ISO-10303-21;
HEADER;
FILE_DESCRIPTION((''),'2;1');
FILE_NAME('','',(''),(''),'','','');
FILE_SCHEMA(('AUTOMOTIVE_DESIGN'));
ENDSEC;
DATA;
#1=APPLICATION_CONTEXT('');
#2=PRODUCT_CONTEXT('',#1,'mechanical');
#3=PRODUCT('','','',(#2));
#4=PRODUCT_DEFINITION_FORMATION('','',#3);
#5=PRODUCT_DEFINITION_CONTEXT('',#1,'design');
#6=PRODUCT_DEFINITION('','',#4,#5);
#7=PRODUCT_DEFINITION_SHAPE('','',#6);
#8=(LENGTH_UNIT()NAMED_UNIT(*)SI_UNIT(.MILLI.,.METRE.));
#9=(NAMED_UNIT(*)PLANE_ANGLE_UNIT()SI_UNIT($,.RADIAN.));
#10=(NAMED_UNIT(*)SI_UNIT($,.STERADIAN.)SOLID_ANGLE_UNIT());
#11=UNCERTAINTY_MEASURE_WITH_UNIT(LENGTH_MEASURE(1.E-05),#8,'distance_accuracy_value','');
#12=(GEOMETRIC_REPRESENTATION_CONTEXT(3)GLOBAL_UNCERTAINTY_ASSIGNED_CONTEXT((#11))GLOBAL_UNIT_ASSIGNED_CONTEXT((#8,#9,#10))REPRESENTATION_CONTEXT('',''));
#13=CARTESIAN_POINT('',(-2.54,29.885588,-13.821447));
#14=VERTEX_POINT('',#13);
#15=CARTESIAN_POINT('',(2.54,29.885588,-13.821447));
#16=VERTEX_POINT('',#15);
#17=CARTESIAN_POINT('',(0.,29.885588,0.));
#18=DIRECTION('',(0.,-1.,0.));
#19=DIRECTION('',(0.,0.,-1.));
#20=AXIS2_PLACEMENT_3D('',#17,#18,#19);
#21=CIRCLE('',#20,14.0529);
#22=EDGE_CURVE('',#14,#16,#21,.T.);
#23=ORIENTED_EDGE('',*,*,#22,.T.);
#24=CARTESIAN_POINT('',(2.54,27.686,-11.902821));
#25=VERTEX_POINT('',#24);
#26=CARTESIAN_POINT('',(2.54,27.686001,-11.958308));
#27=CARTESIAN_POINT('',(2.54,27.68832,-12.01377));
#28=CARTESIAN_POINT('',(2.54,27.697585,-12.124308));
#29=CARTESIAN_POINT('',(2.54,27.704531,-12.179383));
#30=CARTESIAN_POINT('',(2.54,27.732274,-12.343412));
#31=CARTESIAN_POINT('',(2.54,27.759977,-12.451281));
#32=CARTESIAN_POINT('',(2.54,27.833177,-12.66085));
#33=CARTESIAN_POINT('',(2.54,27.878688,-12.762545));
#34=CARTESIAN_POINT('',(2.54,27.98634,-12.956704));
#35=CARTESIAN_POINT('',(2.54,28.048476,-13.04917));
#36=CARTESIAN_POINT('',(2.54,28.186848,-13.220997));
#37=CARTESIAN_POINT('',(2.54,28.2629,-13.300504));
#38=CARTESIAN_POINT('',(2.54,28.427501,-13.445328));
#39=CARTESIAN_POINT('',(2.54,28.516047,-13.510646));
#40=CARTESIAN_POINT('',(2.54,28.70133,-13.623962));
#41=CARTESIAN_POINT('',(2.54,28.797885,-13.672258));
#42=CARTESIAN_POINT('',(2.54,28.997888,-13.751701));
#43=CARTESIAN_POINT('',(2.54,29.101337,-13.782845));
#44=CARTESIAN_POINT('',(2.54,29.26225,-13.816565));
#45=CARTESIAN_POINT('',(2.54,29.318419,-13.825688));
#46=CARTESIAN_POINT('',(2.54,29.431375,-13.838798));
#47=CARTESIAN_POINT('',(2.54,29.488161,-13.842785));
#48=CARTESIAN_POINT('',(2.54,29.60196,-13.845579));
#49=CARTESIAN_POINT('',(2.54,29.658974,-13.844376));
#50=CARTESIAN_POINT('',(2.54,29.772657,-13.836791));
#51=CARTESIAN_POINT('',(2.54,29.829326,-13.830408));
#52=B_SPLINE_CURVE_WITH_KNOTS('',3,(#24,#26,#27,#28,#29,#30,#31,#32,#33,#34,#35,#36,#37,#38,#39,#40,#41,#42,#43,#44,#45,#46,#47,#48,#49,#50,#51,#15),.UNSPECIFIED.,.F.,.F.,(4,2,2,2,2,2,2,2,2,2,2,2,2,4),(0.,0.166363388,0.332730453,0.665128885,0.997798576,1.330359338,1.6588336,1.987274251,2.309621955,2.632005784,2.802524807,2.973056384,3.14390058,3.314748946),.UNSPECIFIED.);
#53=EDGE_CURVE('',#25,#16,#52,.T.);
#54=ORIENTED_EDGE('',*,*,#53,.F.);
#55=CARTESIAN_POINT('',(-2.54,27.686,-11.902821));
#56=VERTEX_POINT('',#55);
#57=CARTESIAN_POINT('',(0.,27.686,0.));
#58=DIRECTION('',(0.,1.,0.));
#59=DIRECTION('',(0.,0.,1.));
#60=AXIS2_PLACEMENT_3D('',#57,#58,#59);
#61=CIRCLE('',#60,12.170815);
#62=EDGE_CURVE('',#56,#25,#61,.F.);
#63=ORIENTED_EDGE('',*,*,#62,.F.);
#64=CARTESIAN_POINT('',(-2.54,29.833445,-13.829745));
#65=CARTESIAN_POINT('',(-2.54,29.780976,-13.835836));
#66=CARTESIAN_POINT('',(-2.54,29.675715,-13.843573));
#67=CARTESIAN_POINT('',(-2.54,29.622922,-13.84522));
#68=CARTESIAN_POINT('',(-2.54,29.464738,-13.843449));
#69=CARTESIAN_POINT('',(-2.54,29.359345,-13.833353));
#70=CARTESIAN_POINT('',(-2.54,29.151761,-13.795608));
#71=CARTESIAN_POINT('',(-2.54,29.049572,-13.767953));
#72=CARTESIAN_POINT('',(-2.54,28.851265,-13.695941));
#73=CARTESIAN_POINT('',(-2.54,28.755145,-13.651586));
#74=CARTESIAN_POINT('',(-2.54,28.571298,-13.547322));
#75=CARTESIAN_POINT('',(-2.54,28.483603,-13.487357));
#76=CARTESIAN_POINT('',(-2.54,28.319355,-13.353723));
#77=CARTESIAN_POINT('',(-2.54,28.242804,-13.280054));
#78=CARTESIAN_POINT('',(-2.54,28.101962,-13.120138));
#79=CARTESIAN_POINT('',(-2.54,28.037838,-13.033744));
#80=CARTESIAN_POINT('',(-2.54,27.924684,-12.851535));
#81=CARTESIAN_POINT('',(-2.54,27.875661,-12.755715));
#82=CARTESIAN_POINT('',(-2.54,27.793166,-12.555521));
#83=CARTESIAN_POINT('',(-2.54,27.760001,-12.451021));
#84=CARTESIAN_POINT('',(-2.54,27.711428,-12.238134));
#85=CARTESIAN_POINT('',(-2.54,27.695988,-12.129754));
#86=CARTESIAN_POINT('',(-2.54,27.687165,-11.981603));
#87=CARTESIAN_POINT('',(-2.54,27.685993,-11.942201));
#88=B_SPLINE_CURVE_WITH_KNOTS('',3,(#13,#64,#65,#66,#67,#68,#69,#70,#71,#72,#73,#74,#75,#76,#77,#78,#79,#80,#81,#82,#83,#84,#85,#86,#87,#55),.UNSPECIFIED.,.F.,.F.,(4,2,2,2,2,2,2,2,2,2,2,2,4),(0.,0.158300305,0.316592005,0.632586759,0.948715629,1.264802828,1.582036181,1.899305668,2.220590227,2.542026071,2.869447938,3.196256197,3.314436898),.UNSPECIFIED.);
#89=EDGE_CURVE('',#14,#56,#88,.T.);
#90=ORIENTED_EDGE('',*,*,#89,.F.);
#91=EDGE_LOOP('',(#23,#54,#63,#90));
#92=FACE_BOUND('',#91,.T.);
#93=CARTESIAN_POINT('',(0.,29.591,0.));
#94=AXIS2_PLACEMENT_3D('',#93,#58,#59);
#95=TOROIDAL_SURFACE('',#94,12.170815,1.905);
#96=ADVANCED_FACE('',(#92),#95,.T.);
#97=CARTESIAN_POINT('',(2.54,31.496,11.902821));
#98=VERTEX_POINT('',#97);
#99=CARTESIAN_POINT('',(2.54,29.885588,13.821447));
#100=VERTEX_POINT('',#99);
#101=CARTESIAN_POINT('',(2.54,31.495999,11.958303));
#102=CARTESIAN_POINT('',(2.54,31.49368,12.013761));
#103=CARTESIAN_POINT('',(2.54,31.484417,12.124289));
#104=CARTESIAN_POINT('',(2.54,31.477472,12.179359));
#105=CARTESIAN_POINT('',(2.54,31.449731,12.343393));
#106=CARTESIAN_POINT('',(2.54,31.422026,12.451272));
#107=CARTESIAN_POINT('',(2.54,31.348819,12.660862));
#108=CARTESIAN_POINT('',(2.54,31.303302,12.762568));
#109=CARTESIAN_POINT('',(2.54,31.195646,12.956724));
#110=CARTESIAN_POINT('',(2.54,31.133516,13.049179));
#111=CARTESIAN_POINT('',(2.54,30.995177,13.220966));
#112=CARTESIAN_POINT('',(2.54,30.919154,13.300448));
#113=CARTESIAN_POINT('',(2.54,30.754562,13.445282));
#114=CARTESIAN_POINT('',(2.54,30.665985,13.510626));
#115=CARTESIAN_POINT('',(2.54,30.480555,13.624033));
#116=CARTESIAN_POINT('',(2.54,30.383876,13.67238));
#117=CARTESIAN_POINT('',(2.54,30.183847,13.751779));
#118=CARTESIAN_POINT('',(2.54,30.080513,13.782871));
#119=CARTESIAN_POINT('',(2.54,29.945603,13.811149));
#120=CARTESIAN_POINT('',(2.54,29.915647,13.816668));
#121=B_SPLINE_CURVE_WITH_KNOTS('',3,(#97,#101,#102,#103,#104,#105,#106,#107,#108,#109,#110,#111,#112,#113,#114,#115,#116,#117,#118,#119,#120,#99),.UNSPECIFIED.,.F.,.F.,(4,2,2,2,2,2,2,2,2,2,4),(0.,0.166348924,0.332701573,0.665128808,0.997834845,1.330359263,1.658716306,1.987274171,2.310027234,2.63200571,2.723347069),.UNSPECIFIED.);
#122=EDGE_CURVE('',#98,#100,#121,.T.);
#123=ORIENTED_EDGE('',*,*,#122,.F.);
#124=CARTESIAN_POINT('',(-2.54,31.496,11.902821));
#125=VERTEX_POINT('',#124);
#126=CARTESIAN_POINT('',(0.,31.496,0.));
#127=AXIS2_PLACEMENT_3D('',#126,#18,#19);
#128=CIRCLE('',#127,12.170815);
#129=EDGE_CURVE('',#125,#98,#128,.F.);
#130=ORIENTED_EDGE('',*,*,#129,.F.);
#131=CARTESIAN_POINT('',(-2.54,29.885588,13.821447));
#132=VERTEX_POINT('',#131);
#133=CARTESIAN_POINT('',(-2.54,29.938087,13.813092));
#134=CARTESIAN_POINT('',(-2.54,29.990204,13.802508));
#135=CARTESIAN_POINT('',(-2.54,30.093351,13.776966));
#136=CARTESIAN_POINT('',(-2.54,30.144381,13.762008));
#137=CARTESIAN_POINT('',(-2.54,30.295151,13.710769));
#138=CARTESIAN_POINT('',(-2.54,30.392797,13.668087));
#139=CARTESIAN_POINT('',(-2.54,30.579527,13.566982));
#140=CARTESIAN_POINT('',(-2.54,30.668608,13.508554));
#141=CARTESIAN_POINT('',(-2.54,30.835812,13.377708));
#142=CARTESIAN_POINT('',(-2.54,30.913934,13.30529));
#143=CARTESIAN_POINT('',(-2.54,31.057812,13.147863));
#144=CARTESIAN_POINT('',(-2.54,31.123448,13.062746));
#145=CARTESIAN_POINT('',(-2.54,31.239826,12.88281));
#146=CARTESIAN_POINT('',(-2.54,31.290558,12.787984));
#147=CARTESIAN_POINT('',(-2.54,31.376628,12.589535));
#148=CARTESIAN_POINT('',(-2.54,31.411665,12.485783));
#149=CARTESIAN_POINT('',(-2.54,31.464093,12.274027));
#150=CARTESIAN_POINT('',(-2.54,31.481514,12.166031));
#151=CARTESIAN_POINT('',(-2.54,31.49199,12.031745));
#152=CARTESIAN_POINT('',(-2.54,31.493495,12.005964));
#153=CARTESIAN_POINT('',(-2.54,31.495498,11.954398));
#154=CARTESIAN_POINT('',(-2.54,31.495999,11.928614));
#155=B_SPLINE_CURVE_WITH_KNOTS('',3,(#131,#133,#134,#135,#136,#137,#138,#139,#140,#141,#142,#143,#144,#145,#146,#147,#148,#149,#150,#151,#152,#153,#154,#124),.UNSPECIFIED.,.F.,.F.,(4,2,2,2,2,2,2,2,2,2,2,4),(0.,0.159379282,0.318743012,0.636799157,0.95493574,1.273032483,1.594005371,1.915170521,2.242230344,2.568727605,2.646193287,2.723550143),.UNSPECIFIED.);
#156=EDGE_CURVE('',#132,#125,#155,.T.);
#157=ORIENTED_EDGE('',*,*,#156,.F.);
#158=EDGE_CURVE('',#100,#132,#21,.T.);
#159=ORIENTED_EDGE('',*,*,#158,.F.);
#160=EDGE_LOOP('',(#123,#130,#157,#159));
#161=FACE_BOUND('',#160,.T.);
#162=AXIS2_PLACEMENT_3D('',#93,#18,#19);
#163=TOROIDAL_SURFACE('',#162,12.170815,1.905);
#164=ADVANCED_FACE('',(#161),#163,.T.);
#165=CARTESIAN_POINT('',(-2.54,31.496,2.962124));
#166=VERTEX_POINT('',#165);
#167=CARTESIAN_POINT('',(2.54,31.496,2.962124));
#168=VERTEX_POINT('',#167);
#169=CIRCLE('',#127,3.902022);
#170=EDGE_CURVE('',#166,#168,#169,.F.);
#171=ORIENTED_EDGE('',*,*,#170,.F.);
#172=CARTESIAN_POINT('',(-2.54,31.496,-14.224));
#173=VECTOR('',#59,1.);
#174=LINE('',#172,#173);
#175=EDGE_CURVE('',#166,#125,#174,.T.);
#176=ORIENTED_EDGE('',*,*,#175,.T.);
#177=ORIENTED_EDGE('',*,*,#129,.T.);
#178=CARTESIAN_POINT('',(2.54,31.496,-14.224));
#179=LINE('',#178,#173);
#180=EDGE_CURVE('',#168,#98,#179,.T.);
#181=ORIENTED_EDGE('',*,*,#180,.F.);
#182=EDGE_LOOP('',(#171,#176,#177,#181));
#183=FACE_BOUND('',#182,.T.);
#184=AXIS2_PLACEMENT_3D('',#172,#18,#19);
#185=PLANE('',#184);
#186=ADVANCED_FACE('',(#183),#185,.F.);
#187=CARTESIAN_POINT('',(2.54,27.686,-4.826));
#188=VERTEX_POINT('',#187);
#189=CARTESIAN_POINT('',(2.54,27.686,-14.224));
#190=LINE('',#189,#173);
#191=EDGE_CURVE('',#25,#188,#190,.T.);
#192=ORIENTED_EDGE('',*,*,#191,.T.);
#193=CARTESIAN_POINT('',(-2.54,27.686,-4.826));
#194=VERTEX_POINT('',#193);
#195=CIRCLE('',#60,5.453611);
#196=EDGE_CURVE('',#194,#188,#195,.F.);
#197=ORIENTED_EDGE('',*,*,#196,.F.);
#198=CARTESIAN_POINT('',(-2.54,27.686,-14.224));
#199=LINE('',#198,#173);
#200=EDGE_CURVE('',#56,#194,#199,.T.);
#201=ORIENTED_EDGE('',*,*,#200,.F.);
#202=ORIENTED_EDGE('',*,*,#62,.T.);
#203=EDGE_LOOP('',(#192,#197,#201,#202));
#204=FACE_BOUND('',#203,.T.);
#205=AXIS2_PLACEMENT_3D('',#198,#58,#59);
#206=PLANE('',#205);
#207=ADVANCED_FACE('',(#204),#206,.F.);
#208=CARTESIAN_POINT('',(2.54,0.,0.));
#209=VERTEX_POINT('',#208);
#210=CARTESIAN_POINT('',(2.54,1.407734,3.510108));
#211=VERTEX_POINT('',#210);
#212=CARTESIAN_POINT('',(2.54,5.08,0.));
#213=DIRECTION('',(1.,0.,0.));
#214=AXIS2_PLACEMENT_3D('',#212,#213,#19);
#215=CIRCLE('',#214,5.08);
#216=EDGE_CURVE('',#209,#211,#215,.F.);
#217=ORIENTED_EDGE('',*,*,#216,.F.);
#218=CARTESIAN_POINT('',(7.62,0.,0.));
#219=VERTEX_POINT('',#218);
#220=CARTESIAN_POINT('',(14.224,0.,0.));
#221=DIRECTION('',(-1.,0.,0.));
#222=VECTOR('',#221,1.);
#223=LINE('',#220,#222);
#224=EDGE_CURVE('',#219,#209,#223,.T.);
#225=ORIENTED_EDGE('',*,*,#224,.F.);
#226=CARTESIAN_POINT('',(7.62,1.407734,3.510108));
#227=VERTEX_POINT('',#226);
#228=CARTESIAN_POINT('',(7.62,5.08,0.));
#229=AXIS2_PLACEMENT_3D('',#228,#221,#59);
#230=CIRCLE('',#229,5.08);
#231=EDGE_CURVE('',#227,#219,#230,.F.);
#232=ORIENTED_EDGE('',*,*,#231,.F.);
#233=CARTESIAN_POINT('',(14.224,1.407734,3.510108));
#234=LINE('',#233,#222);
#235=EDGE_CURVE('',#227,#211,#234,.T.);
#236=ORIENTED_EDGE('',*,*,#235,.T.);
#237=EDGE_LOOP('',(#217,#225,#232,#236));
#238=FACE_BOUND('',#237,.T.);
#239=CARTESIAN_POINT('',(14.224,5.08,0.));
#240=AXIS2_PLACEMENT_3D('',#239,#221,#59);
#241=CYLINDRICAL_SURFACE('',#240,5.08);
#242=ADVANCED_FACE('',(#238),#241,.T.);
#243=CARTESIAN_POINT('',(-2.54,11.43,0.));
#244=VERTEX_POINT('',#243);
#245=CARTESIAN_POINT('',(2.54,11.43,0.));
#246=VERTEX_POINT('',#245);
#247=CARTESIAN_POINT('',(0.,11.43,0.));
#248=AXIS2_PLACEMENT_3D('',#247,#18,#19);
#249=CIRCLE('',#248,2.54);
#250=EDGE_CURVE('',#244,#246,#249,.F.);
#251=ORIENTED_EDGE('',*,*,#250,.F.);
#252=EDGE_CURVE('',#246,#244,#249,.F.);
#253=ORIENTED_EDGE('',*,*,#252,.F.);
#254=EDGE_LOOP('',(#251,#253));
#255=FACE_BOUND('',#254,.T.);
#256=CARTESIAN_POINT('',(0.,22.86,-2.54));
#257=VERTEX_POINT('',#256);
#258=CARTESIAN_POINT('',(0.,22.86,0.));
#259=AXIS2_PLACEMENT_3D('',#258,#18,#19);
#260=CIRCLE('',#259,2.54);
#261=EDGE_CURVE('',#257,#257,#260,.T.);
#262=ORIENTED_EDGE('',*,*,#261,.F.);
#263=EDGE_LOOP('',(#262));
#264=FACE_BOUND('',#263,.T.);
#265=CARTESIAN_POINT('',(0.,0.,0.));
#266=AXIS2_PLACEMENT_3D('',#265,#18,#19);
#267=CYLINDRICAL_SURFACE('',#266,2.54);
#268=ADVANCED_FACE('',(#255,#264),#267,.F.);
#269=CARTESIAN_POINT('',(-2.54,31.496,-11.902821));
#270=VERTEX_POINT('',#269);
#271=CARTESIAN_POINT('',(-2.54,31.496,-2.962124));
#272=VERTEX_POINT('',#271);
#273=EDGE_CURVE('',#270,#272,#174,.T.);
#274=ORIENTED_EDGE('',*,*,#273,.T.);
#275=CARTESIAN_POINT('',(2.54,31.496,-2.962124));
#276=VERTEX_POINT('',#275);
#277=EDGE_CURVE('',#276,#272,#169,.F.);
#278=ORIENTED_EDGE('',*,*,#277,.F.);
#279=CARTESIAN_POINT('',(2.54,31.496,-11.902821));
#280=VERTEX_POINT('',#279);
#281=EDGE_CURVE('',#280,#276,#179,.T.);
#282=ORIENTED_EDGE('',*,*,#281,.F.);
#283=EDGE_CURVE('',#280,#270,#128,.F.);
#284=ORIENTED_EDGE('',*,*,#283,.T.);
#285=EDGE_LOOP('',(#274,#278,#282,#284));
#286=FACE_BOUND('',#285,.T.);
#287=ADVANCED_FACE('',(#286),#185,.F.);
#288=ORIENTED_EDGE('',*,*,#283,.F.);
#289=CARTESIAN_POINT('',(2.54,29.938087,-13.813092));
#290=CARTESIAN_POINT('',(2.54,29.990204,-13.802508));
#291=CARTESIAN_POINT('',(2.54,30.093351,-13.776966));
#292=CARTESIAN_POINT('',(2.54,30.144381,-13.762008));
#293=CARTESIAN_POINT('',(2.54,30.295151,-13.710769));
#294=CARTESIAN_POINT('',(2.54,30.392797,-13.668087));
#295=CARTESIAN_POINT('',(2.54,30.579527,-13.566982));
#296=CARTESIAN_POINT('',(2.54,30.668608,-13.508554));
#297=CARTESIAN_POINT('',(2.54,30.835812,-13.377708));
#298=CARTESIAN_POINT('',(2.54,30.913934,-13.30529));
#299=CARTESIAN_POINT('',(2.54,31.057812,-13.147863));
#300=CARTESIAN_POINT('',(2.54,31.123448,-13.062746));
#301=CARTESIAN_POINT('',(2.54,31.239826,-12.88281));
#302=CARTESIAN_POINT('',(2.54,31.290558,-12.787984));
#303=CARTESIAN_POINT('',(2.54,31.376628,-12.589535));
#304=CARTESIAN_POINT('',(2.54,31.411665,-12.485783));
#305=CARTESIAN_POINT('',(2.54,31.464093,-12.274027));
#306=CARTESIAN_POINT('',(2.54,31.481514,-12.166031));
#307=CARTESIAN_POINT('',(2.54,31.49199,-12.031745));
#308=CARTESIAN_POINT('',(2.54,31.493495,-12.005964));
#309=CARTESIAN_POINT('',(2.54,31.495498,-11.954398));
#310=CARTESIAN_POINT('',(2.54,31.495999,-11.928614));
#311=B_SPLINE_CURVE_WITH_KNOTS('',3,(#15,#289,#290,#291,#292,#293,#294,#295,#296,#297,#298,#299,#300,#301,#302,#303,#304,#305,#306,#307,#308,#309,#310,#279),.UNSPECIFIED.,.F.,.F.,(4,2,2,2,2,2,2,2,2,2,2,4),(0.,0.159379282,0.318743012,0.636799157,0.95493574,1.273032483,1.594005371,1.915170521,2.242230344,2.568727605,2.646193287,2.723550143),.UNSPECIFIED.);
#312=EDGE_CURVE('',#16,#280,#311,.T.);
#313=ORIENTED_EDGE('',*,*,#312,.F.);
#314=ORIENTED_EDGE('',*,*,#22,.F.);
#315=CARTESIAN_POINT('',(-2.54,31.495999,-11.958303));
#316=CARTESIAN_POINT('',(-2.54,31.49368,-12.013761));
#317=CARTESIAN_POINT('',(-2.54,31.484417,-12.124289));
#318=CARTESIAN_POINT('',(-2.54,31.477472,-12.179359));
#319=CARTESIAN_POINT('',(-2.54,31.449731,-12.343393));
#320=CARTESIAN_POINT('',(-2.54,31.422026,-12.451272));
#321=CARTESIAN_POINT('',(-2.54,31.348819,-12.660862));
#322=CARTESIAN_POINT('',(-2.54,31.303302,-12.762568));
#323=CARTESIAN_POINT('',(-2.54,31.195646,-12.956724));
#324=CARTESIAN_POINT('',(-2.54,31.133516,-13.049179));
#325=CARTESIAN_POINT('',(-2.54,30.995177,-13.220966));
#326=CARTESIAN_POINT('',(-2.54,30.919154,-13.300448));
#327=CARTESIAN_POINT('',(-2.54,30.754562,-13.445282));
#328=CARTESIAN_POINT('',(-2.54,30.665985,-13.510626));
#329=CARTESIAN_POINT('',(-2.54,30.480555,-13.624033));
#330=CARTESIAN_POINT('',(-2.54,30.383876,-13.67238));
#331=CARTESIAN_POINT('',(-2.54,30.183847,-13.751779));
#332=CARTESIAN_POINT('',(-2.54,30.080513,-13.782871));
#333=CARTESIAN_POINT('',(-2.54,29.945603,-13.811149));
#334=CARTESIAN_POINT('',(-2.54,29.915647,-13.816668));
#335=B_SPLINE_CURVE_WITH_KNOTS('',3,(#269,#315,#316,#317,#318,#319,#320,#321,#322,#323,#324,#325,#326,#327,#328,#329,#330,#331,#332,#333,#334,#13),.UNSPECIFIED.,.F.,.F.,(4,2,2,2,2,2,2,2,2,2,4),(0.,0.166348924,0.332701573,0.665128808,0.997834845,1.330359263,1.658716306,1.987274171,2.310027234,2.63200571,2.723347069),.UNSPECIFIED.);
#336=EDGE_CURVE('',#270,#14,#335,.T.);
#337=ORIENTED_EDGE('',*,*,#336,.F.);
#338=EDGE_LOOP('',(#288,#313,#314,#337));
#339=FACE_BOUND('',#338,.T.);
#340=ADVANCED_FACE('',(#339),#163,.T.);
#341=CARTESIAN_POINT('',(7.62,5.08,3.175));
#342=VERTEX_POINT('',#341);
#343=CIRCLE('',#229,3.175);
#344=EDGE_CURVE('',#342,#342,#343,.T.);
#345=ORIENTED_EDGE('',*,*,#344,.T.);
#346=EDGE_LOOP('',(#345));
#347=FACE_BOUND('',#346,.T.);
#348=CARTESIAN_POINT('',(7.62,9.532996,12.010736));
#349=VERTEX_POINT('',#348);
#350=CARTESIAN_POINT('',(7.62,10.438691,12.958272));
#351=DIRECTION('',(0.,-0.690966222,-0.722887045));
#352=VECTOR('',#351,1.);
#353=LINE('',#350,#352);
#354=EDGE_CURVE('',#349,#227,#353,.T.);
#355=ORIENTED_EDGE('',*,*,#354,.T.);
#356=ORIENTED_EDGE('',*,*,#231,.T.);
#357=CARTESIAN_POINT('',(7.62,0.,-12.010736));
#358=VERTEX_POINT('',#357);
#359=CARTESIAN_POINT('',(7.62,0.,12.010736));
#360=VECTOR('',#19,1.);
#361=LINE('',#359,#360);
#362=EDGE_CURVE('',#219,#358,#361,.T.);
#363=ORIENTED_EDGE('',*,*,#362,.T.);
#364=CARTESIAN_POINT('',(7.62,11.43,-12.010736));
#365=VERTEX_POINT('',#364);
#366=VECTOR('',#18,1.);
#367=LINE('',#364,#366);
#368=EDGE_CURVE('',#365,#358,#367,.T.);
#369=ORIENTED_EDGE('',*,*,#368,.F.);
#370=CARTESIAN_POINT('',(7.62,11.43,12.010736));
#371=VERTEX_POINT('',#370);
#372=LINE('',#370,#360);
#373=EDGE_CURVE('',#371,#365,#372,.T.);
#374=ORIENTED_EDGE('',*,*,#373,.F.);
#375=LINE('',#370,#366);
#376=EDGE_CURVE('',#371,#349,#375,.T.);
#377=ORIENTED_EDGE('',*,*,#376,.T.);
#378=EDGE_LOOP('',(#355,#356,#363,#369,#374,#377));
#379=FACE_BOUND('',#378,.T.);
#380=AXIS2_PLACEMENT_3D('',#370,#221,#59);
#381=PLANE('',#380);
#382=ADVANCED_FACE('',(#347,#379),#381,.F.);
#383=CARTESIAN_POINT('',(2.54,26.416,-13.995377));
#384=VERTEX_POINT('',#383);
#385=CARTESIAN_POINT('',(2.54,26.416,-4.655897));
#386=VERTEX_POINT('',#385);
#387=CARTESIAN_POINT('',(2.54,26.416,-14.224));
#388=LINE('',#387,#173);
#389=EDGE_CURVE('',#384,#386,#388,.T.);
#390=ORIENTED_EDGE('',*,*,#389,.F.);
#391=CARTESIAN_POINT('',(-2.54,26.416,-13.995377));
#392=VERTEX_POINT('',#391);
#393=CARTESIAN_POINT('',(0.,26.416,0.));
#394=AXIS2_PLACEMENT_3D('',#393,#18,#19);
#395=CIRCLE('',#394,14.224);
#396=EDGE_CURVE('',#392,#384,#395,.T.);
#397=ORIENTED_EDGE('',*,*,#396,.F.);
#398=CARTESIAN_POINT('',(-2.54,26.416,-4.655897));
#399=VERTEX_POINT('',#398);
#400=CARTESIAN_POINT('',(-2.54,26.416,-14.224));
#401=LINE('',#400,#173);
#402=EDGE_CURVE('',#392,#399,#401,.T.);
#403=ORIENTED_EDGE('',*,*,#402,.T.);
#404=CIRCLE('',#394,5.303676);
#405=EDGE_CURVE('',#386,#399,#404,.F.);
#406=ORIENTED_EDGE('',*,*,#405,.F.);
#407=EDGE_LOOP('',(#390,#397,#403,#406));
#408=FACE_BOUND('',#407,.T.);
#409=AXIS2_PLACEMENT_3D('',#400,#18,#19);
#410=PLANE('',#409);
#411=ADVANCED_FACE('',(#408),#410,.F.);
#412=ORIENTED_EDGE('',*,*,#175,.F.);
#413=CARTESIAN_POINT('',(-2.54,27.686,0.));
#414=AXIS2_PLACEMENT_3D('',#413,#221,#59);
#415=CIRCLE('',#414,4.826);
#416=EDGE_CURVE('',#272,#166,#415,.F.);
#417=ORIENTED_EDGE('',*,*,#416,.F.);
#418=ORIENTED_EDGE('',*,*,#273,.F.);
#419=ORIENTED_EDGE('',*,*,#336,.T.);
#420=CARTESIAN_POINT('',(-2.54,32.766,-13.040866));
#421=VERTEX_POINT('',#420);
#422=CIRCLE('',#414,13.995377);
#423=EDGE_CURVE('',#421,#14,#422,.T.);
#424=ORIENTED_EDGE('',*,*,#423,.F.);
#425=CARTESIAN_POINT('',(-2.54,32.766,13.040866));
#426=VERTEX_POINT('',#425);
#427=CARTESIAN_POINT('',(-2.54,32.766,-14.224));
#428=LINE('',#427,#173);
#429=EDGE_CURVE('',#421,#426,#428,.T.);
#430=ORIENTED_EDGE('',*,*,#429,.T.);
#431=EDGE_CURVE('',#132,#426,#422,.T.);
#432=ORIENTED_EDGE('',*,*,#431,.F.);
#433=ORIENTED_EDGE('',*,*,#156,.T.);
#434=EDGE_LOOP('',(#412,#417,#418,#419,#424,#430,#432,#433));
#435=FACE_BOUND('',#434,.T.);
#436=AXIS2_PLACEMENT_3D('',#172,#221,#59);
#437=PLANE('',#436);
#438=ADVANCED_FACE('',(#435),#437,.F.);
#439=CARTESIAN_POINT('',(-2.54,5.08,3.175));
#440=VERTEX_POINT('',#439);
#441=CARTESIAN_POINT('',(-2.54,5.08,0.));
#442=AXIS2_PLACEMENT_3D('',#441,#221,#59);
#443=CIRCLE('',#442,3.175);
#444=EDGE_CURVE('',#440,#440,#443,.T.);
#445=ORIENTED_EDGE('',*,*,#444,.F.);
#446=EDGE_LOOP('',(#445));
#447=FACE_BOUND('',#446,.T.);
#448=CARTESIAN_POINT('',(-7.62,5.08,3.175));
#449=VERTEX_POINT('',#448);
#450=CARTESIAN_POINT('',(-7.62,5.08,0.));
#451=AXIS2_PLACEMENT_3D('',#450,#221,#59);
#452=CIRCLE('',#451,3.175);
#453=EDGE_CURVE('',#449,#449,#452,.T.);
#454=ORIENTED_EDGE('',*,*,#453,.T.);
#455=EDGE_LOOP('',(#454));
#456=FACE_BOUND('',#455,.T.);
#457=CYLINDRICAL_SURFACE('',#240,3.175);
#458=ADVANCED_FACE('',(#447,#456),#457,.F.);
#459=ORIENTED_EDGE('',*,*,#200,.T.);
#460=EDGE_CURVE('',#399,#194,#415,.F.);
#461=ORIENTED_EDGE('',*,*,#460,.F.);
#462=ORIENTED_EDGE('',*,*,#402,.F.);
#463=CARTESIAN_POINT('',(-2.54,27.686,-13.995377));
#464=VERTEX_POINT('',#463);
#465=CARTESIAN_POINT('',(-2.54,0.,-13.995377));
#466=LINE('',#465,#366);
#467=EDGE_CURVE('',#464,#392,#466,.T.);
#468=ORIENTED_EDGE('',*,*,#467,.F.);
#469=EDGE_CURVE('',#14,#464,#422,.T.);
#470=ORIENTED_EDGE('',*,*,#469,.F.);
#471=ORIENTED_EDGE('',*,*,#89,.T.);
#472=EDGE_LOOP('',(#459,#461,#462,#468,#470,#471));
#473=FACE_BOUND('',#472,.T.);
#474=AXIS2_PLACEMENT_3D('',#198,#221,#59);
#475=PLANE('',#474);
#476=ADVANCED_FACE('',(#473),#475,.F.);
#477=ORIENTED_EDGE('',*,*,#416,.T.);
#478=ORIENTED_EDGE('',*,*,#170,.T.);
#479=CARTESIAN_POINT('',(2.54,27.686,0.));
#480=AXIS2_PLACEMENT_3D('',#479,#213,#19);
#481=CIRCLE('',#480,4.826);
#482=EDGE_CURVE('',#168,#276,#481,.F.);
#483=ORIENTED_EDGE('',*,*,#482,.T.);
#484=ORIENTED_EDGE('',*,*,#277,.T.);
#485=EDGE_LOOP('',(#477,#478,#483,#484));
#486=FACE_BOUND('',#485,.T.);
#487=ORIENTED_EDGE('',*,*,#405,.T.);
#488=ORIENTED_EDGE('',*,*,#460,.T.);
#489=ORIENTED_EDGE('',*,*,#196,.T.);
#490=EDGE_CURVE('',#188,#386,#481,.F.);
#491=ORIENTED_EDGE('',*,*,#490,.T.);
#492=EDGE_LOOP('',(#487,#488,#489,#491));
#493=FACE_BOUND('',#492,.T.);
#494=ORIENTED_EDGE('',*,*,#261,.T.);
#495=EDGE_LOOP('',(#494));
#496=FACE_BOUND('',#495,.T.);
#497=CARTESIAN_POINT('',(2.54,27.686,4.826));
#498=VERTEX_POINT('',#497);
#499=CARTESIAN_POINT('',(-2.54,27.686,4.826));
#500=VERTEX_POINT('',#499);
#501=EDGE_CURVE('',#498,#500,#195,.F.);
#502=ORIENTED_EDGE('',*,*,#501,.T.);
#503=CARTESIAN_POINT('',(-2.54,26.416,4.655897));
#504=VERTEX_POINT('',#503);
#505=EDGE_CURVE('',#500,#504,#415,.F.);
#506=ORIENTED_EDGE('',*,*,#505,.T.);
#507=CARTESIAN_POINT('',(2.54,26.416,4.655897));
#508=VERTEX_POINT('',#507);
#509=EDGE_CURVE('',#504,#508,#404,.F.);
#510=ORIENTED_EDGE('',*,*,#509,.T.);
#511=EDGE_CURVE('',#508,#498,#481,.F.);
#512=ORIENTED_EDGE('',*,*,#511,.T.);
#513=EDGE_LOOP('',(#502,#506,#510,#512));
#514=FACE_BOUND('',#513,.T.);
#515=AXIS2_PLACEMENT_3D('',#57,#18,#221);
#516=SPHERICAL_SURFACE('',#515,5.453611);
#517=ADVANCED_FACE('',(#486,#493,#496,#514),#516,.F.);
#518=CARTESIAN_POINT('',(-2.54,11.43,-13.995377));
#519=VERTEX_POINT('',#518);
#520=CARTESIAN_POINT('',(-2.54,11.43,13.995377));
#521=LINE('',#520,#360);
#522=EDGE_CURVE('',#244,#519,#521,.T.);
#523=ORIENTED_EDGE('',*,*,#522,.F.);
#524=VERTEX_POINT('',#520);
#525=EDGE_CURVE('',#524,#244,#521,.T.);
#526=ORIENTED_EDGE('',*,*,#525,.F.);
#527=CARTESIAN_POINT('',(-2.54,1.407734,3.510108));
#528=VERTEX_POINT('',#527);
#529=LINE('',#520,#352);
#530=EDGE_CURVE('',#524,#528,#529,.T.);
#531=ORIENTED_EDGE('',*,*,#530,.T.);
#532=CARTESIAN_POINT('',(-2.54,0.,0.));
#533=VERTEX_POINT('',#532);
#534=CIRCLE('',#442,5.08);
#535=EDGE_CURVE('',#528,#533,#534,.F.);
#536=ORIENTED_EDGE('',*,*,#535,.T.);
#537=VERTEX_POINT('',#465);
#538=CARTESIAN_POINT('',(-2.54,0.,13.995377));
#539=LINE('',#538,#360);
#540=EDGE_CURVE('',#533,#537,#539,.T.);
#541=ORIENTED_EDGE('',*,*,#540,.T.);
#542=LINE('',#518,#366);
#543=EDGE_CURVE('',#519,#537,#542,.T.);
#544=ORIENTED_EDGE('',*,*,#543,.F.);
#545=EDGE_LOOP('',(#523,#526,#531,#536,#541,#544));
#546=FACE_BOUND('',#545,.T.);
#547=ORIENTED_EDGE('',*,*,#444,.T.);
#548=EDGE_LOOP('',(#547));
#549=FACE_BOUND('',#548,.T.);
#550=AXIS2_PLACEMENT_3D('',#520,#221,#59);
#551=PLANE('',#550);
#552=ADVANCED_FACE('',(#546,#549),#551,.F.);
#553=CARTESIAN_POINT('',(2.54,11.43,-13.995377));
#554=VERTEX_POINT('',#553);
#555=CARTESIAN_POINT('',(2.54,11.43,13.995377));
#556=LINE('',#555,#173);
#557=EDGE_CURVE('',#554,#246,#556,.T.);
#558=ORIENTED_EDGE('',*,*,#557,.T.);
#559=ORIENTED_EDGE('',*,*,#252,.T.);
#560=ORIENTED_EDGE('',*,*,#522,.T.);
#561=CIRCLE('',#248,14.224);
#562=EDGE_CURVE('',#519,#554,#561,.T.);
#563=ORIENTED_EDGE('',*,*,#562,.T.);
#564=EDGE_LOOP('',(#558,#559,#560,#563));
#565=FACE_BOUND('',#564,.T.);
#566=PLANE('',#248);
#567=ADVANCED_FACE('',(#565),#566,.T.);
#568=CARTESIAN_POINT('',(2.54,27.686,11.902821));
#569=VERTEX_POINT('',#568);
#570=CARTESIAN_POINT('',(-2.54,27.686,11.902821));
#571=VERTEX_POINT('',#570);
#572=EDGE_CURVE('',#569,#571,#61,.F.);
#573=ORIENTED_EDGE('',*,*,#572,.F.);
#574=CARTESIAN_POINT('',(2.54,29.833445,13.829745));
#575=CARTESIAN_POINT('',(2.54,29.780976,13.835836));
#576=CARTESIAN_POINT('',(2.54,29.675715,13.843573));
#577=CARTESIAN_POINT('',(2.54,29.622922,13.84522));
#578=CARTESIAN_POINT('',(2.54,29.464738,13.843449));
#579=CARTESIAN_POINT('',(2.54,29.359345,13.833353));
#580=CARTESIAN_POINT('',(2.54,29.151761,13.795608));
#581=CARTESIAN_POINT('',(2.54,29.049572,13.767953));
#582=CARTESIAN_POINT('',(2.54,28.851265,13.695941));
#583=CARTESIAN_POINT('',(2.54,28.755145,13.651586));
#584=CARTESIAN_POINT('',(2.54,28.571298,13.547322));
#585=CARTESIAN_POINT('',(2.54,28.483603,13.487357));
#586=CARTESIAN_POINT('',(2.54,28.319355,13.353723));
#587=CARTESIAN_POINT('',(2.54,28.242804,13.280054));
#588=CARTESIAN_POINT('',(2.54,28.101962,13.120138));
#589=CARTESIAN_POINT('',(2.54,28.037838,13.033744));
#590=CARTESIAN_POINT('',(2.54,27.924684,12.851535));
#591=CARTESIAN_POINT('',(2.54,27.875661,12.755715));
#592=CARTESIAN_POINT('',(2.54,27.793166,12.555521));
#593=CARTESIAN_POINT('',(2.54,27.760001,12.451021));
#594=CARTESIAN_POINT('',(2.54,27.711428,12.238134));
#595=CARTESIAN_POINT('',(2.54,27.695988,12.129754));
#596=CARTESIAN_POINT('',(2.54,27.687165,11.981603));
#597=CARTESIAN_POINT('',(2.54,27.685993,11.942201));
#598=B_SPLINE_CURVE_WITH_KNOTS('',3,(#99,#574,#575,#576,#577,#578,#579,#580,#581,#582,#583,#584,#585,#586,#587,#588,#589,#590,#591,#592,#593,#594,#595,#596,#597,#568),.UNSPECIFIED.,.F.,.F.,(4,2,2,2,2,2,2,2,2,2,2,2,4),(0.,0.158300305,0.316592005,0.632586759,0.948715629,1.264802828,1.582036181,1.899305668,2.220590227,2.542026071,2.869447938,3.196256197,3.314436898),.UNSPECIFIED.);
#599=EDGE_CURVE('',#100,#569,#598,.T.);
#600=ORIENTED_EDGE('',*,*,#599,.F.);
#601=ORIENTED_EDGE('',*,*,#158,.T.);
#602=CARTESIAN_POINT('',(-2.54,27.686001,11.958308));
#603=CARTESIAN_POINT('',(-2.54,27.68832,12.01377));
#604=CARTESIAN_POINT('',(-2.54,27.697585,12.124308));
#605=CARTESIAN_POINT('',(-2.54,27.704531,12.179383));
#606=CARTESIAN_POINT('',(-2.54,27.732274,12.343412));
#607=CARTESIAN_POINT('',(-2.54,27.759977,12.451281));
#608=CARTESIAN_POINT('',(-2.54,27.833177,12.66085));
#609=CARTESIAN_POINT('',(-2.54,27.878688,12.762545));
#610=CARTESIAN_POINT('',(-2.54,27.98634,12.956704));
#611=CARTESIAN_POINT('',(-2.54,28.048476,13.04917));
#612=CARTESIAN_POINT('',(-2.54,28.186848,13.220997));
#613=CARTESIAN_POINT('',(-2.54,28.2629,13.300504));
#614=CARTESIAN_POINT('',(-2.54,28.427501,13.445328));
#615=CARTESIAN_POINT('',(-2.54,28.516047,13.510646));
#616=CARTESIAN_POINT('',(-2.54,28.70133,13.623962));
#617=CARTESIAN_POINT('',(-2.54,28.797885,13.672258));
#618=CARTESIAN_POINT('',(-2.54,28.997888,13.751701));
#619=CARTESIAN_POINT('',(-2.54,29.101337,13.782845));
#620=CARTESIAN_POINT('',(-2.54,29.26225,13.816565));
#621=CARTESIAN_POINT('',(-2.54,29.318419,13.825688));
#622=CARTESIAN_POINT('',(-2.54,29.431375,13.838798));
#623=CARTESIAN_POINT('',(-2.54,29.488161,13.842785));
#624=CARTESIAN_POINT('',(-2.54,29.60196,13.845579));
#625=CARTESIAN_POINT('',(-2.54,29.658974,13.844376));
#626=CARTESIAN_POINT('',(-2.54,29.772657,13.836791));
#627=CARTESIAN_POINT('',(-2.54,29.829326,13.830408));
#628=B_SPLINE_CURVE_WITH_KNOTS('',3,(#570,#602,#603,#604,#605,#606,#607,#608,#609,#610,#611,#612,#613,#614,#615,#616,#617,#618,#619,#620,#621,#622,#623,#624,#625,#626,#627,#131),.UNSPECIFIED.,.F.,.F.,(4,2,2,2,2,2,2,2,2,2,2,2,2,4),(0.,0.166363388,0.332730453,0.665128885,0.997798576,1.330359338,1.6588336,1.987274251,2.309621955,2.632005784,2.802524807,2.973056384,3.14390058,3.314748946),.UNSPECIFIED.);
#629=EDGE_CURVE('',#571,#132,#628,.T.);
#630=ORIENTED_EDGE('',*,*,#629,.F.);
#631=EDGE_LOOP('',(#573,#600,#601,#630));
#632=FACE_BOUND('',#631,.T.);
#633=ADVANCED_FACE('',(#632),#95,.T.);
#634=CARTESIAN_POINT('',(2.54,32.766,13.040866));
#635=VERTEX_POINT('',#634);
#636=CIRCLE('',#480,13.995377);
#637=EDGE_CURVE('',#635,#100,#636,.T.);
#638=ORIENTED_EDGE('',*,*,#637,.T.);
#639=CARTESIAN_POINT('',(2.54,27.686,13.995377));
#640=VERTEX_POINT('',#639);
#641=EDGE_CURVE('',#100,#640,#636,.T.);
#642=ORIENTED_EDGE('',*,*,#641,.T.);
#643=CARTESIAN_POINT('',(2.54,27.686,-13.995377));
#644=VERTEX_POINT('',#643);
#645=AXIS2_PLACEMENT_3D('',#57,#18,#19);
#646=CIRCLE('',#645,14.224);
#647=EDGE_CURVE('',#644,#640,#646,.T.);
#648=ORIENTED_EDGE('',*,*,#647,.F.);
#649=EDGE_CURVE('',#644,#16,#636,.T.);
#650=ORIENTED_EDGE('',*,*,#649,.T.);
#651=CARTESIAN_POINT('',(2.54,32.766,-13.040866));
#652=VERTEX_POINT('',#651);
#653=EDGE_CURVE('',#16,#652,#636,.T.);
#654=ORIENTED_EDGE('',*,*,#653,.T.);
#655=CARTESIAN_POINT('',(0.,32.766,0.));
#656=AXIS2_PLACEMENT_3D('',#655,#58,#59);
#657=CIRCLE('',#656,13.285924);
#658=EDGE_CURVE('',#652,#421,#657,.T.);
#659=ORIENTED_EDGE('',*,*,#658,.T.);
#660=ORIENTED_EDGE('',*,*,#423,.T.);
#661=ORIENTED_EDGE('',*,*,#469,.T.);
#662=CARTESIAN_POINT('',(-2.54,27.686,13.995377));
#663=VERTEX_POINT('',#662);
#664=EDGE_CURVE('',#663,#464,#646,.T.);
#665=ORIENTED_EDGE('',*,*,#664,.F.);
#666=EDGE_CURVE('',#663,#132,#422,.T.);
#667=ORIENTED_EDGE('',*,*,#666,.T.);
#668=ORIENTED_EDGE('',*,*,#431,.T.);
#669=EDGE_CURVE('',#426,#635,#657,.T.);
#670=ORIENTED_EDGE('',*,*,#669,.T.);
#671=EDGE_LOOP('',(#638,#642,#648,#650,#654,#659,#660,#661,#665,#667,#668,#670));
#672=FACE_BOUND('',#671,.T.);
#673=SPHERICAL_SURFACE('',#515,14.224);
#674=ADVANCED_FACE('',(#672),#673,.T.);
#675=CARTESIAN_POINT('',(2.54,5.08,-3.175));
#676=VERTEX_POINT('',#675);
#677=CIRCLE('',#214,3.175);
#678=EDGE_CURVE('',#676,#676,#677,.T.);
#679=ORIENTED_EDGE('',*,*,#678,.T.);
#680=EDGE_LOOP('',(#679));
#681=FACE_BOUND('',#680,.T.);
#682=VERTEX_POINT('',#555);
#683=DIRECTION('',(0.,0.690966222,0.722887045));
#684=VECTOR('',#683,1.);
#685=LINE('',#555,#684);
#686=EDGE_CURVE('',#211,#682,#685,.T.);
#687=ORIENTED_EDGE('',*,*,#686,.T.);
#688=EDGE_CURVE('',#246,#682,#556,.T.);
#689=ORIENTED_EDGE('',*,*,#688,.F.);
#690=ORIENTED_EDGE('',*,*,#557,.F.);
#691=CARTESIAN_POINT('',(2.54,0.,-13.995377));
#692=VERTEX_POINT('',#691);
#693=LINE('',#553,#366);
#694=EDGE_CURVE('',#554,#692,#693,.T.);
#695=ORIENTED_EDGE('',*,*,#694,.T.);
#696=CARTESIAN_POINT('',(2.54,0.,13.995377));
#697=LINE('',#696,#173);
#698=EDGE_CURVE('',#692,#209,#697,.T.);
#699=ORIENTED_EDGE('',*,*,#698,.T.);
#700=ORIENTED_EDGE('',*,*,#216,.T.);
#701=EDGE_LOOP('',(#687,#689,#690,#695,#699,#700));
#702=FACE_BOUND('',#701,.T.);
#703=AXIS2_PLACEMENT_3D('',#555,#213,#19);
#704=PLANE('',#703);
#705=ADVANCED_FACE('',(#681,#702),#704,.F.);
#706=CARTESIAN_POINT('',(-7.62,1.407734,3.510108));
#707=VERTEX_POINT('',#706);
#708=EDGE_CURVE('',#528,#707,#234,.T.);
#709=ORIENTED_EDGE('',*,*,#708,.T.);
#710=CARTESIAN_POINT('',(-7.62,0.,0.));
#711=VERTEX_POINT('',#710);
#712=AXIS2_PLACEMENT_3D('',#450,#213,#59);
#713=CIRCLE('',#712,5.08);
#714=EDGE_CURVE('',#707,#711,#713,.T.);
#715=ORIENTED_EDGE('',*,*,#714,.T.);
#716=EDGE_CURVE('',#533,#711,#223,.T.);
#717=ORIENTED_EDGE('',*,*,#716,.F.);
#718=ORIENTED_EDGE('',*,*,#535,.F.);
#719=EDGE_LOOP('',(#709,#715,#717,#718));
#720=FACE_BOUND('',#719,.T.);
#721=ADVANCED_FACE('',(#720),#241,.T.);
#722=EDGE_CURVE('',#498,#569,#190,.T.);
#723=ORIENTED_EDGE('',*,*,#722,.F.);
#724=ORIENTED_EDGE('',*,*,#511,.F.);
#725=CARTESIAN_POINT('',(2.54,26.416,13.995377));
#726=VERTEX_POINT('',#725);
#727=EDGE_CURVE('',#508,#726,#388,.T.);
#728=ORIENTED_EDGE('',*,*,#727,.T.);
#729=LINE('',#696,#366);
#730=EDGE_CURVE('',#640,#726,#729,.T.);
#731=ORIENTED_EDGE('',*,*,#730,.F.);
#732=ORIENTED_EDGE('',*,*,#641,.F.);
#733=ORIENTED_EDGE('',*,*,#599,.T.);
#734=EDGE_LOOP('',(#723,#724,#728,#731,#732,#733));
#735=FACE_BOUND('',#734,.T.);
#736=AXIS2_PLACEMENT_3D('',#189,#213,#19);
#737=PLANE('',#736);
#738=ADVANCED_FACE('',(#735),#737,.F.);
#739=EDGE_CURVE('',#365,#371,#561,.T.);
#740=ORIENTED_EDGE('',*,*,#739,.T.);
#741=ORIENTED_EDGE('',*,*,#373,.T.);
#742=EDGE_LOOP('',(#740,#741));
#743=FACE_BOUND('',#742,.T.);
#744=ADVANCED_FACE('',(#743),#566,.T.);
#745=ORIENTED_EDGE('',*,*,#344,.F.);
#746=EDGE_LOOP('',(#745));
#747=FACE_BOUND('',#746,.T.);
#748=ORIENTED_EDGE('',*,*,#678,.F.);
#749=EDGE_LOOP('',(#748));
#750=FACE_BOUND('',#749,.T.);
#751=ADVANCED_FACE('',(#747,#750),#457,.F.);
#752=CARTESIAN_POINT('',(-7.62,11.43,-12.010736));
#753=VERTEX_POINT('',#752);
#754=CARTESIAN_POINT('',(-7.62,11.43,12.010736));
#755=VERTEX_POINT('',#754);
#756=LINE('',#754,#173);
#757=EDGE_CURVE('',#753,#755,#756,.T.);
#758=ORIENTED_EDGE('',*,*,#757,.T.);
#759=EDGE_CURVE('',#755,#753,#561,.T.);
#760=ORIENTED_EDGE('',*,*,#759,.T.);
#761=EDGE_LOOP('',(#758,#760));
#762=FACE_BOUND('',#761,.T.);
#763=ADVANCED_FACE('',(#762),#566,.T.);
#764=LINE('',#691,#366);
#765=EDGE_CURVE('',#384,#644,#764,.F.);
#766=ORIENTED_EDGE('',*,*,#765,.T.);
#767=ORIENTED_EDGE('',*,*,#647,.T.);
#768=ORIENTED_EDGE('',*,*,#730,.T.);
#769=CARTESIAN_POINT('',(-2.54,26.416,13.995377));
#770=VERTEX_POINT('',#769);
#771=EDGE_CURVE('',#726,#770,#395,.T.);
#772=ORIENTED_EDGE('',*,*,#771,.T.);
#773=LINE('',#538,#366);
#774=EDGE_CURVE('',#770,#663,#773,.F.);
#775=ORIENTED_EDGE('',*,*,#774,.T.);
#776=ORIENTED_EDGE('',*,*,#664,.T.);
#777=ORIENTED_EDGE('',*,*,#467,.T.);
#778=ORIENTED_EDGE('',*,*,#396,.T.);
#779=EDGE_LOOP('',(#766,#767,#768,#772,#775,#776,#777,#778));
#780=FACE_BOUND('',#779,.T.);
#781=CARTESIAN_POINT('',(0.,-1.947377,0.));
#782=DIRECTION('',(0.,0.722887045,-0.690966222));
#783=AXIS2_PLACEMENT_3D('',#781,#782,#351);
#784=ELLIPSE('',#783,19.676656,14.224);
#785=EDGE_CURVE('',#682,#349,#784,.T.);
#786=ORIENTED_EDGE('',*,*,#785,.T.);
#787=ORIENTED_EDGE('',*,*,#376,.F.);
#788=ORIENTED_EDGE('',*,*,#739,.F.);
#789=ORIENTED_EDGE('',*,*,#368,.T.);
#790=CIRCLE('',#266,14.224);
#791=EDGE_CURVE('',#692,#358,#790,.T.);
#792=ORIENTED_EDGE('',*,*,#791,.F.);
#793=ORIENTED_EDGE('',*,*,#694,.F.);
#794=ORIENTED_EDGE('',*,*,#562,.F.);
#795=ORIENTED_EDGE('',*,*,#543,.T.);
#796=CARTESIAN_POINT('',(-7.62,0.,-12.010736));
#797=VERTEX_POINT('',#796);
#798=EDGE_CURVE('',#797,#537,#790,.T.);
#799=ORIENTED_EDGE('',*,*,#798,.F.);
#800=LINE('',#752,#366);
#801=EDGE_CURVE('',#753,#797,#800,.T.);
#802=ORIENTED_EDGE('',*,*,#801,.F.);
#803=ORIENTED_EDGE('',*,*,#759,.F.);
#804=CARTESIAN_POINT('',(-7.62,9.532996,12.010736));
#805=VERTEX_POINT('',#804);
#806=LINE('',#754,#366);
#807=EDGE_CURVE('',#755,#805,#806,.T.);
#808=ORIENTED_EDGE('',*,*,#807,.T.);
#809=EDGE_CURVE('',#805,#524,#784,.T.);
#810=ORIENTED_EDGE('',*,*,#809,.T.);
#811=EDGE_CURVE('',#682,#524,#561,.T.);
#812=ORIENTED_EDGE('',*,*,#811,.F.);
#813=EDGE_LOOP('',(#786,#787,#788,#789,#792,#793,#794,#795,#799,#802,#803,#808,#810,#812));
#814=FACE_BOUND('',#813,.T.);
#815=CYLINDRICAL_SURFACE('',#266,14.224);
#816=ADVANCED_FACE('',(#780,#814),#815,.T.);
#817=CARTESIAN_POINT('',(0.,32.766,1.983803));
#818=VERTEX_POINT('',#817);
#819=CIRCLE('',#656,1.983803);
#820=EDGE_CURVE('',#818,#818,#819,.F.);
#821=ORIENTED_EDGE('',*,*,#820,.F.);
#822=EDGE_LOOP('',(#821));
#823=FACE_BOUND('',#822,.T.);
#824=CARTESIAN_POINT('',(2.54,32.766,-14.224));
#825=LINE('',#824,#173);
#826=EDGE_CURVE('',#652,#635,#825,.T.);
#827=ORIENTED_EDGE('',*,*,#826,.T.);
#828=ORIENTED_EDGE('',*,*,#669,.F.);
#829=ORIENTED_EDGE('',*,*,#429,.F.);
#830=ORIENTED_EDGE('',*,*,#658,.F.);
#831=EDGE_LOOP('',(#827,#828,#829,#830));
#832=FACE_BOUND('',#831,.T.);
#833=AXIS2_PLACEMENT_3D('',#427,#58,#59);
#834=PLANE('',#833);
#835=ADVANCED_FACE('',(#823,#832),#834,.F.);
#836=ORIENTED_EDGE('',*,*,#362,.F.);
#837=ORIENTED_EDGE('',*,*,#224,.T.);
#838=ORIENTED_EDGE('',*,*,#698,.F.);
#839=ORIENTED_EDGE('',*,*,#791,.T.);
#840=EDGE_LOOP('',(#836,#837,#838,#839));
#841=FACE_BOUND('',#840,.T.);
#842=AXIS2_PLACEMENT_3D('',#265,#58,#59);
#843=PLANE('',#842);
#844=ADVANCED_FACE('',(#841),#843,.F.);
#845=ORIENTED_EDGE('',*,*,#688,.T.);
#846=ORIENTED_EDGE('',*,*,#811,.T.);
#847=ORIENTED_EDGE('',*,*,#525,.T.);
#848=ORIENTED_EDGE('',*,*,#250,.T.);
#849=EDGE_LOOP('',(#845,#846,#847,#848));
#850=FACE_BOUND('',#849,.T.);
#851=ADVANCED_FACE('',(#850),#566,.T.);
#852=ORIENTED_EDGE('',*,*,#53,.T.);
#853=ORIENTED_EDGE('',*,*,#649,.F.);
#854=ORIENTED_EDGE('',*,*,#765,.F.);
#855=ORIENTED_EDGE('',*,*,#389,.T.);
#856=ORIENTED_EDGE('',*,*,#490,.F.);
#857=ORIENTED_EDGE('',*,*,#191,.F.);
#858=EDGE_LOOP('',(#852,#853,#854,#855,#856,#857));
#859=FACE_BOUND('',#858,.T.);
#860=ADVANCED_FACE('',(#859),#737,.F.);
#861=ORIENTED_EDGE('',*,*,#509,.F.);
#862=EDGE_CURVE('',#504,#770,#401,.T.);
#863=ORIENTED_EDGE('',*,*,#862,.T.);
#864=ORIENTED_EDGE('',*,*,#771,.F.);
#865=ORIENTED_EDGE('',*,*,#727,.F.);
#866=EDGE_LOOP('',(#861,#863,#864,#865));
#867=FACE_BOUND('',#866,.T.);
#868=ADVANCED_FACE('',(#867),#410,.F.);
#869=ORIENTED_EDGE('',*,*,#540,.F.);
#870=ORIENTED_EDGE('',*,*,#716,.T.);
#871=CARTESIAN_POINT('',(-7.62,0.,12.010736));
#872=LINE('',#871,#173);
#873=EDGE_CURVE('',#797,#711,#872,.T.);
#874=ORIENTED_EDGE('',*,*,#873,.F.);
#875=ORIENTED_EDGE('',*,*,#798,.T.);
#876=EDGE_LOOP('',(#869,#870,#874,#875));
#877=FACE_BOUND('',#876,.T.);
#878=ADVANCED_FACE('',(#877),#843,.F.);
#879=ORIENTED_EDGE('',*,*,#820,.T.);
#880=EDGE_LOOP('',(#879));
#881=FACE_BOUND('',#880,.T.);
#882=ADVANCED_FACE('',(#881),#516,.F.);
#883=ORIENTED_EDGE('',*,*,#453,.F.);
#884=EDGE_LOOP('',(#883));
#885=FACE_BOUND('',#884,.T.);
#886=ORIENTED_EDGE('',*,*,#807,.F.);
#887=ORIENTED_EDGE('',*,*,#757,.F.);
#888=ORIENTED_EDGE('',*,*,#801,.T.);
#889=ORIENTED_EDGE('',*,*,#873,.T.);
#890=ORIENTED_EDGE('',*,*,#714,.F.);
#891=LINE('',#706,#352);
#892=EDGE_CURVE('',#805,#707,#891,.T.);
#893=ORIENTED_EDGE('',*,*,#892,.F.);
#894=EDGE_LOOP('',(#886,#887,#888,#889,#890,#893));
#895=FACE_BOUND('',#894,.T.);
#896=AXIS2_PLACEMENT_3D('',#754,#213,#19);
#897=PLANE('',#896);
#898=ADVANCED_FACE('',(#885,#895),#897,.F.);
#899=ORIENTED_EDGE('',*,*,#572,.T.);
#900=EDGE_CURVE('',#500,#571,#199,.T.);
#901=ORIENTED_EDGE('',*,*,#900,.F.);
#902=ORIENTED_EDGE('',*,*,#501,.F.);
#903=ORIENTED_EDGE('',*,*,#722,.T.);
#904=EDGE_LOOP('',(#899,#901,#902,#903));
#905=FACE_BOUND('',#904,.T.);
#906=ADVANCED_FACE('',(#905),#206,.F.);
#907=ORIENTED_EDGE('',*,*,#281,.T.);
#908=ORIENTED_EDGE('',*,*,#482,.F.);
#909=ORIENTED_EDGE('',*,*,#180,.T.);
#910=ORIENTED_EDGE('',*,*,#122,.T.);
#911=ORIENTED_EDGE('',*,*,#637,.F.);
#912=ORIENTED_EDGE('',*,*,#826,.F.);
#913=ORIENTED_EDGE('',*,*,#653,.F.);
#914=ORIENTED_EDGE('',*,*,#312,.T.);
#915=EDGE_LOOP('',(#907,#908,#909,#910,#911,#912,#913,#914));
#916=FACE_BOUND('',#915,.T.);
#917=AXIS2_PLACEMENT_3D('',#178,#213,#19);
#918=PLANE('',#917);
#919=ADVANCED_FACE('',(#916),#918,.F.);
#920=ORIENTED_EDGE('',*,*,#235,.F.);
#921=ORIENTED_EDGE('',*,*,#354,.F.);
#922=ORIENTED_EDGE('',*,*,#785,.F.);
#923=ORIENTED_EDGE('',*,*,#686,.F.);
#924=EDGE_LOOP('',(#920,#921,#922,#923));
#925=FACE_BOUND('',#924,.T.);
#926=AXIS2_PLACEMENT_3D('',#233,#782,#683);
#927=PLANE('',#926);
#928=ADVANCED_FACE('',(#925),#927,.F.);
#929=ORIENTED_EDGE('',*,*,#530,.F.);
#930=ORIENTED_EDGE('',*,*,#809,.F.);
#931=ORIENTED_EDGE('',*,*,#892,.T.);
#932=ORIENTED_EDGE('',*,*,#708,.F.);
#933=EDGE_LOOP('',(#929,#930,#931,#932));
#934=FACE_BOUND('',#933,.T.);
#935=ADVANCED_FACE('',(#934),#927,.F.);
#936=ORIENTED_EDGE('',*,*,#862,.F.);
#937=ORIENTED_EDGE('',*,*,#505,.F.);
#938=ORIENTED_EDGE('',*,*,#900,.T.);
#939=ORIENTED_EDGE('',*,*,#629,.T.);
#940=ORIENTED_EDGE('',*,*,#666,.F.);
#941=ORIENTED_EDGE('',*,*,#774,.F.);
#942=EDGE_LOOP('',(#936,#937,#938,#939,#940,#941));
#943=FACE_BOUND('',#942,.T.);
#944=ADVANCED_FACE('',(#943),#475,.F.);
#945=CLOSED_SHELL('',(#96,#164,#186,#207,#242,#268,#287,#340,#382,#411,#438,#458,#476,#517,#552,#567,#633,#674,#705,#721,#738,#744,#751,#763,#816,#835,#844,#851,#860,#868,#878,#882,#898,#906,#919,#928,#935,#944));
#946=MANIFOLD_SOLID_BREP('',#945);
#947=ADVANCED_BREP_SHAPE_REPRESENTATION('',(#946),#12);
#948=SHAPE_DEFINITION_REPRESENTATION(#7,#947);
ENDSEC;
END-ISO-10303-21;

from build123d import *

# Parameters (mm, degrees)
CUT_EXTRUDE1_DEPTH      = 11.43
SKETCH3_R               = 3.175
CUT_EXTRUDE2_DEPTH      = 50.355147776
CUT_EXTRUDE3_DEPTH      = 47.487551581
CUT_EXTRUDE3_DEPTH_BACK = 47.487551581
SKETCH4_W               = 5.08
SKETCH4_H               = 1.27
FILLET1_R               = 1.905


with BuildPart() as part:
    # Sketch1 → Revolve1 (revolve)
    with BuildSketch(Plane.XY):
        with BuildLine():
            Line((0, 0), (0, 5.602635041))
            Line((0, 5.602635041), (-2.54, 5.602635041))
            Line((-2.54, 5.602635041), (-2.54, 22.86))
            ThreePointArc((-2.54, 22.86), (-5.294384008, 28.994194932), (0, 33.139611281))
            Line((0, 33.139611281), (0, 41.91))
            ThreePointArc((0, 41.91), (-10.057886856, 37.743886856), (-14.224, 27.686))
            Line((-14.224, 27.686), (-14.224, 0))
            Line((-14.224, 0), (0, 0))
        make_face()
    revolve(axis=Axis((0, 0, 0), (0, 1, 0)))

    # Sketch2 → Cut-Extrude1 (cut)
    with BuildSketch(Plane.XZ):
        with BuildLine():
            Line((-2.54, 13.995376951), (-2.54, -13.995376951))
            ThreePointArc((-2.54, -13.995376951), (0, -14.224), (2.54, -13.995376951))
            Line((2.54, -13.995376951), (2.54, 13.995376951))
            ThreePointArc((2.54, 13.995376951), (0, 14.224), (-2.54, 13.995376951))
        make_face()
        with BuildLine():
            Line((-7.62, 12.010735864), (-7.62, -12.010735864))
            ThreePointArc((-7.62, -12.010735864), (-14.224, 0), (-7.62, 12.010735864))
        make_face()
        with BuildLine():
            Line((7.62, 12.010735864), (7.62, -12.010735864))
            ThreePointArc((7.62, -12.010735864), (14.224, 0), (7.62, 12.010735864))
        make_face()
    extrude(amount=-CUT_EXTRUDE1_DEPTH, mode=Mode.SUBTRACT)

    # Sketch3 → Cut-Extrude2 (cut, through all)
    with BuildSketch(Plane.ZY.offset(7.62)):
        with Locations((0, 5.08)):
            Circle(SKETCH3_R)
        with BuildLine():
            Line((3.510108408, 1.40773381), (13.995376951, 11.43))
            Line((13.995376951, 11.43), (13.995376951, 0))
            Line((13.995376951, 0), (0, 0))
            ThreePointArc((0, 0), (1.890937302, 0.365049722), (3.510108408, 1.40773381))
        make_face()
    extrude(amount=-CUT_EXTRUDE2_DEPTH, mode=Mode.SUBTRACT)

    # Sketch4 → Cut-Extrude3 (cut, two sides: drawn at the far end of the back side and taken through both)
    with BuildSketch(Plane.XY.offset(-CUT_EXTRUDE3_DEPTH_BACK)):
        with Locations((0, 27.051)):
            Rectangle(SKETCH4_W, SKETCH4_H)
        with Locations((0, 32.131)):
            Rectangle(SKETCH4_W, SKETCH4_H)
    extrude(amount=CUT_EXTRUDE3_DEPTH + CUT_EXTRUDE3_DEPTH_BACK, mode=Mode.SUBTRACT)

    # Fillet1
    # the kernel refuses this fillet: 1.905 mm, written as the material it takes off along each edge
    with BuildSketch(Plane(origin=(0, 27.686, 0), x_dir=(-0.5373639456593198, 0, 0.8433504549743527), z_dir=(-0.8433504549743527, 0, -0.5373639456593198))) as fillet1_piece_1_section:
        with BuildLine():
            CenterArc((12.170814928, 1.905), FILLET1_R, 270, 98.895870208)
            Line((12.170814928, 0), (14.224, 0))
            ThreePointArc((14.224, 0), (14.181160416, 1.10311616), (14.05289971, 2.199587629))
        make_face()
    fillet1_piece_1 = revolve(axis=Axis((0, 27.686, 0), (0, 1, 0)), revolution_arc=65.00874172, mode=Mode.PRIVATE)
    fillet1_piece_1 = split(fillet1_piece_1, bisect_by=Plane(origin=(2.54, 28.192059722, 13.665836287), z_dir=(-1, 0, 0)), keep=Keep.TOP, mode=Mode.PRIVATE)
    fillet1_piece_1 = split(fillet1_piece_1, bisect_by=Plane(origin=(-2.54, 28.192059722, 13.665836287), z_dir=(1, 0, 0)), keep=Keep.TOP, mode=Mode.PRIVATE)
    add(fillet1_piece_1, mode=Mode.SUBTRACT)
    with BuildSketch(Plane(origin=(0, 31.496, 0), x_dir=(0.46799048823775274, 0, 0.883733502204703), z_dir=(0.883733502204703, 0, -0.46799048823775274))) as fillet1_piece_2_section:
        with BuildLine():
            CenterArc((12.170814928, 1.905), FILLET1_R, 270, 81.104129792)
            Line((12.170814928, 0), (13.704235696, 0))
            ThreePointArc((13.704235696, 0), (13.90190629, 0.80015324), (14.05289971, 1.610412371))
        make_face()
    fillet1_piece_2 = revolve(axis=Axis((0, 31.496, 0), (0, -1, 0)), revolution_arc=55.807867303, mode=Mode.PRIVATE)
    fillet1_piece_2 = split(fillet1_piece_2, bisect_by=Plane(origin=(-2.54, 31.138166145, 13.379180575), z_dir=(1, 0, 0)), keep=Keep.TOP, mode=Mode.PRIVATE)
    fillet1_piece_2 = split(fillet1_piece_2, bisect_by=Plane(origin=(2.54, 31.138166145, 13.379180575), z_dir=(-1, 0, 0)), keep=Keep.TOP, mode=Mode.PRIVATE)
    add(fillet1_piece_2, mode=Mode.SUBTRACT)
    with BuildSketch(Plane(origin=(0, 31.496, 0), x_dir=(-0.4679904882377507, 0, -0.883733502204704), z_dir=(-0.883733502204704, 0, 0.4679904882377507))) as fillet1_piece_3_section:
        with BuildLine():
            CenterArc((12.170814928, 1.905), FILLET1_R, 270, 81.104129792)
            Line((12.170814928, 0), (13.704235696, 0))
            ThreePointArc((13.704235696, 0), (13.90190629, 0.80015324), (14.05289971, 1.610412371))
        make_face()
    fillet1_piece_3 = revolve(axis=Axis((0, 31.496, 0), (0, -1, 0)), revolution_arc=55.807867303, mode=Mode.PRIVATE)
    fillet1_piece_3 = split(fillet1_piece_3, bisect_by=Plane(origin=(-2.54, 31.138166145, -13.379180575), z_dir=(1, 0, 0)), keep=Keep.TOP, mode=Mode.PRIVATE)
    fillet1_piece_3 = split(fillet1_piece_3, bisect_by=Plane(origin=(2.54, 31.138166145, -13.379180575), z_dir=(-1, 0, 0)), keep=Keep.TOP, mode=Mode.PRIVATE)
    add(fillet1_piece_3, mode=Mode.SUBTRACT)
    with BuildSketch(Plane(origin=(0, 27.686, 0), x_dir=(0.5373639456593708, 0, -0.84335045497432), z_dir=(0.84335045497432, 0, 0.5373639456593708))) as fillet1_piece_4_section:
        with BuildLine():
            CenterArc((12.170814928, 1.905), FILLET1_R, 270, 98.895870208)
            Line((12.170814928, 0), (14.224, 0))
            ThreePointArc((14.224, 0), (14.181160416, 1.10311616), (14.05289971, 2.199587629))
        make_face()
    fillet1_piece_4 = revolve(axis=Axis((0, 27.686, 0), (0, 1, 0)), revolution_arc=65.00874172, mode=Mode.PRIVATE)
    fillet1_piece_4 = split(fillet1_piece_4, bisect_by=Plane(origin=(-2.54, 28.192059722, -13.665836287), z_dir=(1, 0, 0)), keep=Keep.TOP, mode=Mode.PRIVATE)
    fillet1_piece_4 = split(fillet1_piece_4, bisect_by=Plane(origin=(2.54, 28.192059722, -13.665836287), z_dir=(-1, 0, 0)), keep=Keep.TOP, mode=Mode.PRIVATE)
    add(fillet1_piece_4, mode=Mode.SUBTRACT)


solid = part.part
